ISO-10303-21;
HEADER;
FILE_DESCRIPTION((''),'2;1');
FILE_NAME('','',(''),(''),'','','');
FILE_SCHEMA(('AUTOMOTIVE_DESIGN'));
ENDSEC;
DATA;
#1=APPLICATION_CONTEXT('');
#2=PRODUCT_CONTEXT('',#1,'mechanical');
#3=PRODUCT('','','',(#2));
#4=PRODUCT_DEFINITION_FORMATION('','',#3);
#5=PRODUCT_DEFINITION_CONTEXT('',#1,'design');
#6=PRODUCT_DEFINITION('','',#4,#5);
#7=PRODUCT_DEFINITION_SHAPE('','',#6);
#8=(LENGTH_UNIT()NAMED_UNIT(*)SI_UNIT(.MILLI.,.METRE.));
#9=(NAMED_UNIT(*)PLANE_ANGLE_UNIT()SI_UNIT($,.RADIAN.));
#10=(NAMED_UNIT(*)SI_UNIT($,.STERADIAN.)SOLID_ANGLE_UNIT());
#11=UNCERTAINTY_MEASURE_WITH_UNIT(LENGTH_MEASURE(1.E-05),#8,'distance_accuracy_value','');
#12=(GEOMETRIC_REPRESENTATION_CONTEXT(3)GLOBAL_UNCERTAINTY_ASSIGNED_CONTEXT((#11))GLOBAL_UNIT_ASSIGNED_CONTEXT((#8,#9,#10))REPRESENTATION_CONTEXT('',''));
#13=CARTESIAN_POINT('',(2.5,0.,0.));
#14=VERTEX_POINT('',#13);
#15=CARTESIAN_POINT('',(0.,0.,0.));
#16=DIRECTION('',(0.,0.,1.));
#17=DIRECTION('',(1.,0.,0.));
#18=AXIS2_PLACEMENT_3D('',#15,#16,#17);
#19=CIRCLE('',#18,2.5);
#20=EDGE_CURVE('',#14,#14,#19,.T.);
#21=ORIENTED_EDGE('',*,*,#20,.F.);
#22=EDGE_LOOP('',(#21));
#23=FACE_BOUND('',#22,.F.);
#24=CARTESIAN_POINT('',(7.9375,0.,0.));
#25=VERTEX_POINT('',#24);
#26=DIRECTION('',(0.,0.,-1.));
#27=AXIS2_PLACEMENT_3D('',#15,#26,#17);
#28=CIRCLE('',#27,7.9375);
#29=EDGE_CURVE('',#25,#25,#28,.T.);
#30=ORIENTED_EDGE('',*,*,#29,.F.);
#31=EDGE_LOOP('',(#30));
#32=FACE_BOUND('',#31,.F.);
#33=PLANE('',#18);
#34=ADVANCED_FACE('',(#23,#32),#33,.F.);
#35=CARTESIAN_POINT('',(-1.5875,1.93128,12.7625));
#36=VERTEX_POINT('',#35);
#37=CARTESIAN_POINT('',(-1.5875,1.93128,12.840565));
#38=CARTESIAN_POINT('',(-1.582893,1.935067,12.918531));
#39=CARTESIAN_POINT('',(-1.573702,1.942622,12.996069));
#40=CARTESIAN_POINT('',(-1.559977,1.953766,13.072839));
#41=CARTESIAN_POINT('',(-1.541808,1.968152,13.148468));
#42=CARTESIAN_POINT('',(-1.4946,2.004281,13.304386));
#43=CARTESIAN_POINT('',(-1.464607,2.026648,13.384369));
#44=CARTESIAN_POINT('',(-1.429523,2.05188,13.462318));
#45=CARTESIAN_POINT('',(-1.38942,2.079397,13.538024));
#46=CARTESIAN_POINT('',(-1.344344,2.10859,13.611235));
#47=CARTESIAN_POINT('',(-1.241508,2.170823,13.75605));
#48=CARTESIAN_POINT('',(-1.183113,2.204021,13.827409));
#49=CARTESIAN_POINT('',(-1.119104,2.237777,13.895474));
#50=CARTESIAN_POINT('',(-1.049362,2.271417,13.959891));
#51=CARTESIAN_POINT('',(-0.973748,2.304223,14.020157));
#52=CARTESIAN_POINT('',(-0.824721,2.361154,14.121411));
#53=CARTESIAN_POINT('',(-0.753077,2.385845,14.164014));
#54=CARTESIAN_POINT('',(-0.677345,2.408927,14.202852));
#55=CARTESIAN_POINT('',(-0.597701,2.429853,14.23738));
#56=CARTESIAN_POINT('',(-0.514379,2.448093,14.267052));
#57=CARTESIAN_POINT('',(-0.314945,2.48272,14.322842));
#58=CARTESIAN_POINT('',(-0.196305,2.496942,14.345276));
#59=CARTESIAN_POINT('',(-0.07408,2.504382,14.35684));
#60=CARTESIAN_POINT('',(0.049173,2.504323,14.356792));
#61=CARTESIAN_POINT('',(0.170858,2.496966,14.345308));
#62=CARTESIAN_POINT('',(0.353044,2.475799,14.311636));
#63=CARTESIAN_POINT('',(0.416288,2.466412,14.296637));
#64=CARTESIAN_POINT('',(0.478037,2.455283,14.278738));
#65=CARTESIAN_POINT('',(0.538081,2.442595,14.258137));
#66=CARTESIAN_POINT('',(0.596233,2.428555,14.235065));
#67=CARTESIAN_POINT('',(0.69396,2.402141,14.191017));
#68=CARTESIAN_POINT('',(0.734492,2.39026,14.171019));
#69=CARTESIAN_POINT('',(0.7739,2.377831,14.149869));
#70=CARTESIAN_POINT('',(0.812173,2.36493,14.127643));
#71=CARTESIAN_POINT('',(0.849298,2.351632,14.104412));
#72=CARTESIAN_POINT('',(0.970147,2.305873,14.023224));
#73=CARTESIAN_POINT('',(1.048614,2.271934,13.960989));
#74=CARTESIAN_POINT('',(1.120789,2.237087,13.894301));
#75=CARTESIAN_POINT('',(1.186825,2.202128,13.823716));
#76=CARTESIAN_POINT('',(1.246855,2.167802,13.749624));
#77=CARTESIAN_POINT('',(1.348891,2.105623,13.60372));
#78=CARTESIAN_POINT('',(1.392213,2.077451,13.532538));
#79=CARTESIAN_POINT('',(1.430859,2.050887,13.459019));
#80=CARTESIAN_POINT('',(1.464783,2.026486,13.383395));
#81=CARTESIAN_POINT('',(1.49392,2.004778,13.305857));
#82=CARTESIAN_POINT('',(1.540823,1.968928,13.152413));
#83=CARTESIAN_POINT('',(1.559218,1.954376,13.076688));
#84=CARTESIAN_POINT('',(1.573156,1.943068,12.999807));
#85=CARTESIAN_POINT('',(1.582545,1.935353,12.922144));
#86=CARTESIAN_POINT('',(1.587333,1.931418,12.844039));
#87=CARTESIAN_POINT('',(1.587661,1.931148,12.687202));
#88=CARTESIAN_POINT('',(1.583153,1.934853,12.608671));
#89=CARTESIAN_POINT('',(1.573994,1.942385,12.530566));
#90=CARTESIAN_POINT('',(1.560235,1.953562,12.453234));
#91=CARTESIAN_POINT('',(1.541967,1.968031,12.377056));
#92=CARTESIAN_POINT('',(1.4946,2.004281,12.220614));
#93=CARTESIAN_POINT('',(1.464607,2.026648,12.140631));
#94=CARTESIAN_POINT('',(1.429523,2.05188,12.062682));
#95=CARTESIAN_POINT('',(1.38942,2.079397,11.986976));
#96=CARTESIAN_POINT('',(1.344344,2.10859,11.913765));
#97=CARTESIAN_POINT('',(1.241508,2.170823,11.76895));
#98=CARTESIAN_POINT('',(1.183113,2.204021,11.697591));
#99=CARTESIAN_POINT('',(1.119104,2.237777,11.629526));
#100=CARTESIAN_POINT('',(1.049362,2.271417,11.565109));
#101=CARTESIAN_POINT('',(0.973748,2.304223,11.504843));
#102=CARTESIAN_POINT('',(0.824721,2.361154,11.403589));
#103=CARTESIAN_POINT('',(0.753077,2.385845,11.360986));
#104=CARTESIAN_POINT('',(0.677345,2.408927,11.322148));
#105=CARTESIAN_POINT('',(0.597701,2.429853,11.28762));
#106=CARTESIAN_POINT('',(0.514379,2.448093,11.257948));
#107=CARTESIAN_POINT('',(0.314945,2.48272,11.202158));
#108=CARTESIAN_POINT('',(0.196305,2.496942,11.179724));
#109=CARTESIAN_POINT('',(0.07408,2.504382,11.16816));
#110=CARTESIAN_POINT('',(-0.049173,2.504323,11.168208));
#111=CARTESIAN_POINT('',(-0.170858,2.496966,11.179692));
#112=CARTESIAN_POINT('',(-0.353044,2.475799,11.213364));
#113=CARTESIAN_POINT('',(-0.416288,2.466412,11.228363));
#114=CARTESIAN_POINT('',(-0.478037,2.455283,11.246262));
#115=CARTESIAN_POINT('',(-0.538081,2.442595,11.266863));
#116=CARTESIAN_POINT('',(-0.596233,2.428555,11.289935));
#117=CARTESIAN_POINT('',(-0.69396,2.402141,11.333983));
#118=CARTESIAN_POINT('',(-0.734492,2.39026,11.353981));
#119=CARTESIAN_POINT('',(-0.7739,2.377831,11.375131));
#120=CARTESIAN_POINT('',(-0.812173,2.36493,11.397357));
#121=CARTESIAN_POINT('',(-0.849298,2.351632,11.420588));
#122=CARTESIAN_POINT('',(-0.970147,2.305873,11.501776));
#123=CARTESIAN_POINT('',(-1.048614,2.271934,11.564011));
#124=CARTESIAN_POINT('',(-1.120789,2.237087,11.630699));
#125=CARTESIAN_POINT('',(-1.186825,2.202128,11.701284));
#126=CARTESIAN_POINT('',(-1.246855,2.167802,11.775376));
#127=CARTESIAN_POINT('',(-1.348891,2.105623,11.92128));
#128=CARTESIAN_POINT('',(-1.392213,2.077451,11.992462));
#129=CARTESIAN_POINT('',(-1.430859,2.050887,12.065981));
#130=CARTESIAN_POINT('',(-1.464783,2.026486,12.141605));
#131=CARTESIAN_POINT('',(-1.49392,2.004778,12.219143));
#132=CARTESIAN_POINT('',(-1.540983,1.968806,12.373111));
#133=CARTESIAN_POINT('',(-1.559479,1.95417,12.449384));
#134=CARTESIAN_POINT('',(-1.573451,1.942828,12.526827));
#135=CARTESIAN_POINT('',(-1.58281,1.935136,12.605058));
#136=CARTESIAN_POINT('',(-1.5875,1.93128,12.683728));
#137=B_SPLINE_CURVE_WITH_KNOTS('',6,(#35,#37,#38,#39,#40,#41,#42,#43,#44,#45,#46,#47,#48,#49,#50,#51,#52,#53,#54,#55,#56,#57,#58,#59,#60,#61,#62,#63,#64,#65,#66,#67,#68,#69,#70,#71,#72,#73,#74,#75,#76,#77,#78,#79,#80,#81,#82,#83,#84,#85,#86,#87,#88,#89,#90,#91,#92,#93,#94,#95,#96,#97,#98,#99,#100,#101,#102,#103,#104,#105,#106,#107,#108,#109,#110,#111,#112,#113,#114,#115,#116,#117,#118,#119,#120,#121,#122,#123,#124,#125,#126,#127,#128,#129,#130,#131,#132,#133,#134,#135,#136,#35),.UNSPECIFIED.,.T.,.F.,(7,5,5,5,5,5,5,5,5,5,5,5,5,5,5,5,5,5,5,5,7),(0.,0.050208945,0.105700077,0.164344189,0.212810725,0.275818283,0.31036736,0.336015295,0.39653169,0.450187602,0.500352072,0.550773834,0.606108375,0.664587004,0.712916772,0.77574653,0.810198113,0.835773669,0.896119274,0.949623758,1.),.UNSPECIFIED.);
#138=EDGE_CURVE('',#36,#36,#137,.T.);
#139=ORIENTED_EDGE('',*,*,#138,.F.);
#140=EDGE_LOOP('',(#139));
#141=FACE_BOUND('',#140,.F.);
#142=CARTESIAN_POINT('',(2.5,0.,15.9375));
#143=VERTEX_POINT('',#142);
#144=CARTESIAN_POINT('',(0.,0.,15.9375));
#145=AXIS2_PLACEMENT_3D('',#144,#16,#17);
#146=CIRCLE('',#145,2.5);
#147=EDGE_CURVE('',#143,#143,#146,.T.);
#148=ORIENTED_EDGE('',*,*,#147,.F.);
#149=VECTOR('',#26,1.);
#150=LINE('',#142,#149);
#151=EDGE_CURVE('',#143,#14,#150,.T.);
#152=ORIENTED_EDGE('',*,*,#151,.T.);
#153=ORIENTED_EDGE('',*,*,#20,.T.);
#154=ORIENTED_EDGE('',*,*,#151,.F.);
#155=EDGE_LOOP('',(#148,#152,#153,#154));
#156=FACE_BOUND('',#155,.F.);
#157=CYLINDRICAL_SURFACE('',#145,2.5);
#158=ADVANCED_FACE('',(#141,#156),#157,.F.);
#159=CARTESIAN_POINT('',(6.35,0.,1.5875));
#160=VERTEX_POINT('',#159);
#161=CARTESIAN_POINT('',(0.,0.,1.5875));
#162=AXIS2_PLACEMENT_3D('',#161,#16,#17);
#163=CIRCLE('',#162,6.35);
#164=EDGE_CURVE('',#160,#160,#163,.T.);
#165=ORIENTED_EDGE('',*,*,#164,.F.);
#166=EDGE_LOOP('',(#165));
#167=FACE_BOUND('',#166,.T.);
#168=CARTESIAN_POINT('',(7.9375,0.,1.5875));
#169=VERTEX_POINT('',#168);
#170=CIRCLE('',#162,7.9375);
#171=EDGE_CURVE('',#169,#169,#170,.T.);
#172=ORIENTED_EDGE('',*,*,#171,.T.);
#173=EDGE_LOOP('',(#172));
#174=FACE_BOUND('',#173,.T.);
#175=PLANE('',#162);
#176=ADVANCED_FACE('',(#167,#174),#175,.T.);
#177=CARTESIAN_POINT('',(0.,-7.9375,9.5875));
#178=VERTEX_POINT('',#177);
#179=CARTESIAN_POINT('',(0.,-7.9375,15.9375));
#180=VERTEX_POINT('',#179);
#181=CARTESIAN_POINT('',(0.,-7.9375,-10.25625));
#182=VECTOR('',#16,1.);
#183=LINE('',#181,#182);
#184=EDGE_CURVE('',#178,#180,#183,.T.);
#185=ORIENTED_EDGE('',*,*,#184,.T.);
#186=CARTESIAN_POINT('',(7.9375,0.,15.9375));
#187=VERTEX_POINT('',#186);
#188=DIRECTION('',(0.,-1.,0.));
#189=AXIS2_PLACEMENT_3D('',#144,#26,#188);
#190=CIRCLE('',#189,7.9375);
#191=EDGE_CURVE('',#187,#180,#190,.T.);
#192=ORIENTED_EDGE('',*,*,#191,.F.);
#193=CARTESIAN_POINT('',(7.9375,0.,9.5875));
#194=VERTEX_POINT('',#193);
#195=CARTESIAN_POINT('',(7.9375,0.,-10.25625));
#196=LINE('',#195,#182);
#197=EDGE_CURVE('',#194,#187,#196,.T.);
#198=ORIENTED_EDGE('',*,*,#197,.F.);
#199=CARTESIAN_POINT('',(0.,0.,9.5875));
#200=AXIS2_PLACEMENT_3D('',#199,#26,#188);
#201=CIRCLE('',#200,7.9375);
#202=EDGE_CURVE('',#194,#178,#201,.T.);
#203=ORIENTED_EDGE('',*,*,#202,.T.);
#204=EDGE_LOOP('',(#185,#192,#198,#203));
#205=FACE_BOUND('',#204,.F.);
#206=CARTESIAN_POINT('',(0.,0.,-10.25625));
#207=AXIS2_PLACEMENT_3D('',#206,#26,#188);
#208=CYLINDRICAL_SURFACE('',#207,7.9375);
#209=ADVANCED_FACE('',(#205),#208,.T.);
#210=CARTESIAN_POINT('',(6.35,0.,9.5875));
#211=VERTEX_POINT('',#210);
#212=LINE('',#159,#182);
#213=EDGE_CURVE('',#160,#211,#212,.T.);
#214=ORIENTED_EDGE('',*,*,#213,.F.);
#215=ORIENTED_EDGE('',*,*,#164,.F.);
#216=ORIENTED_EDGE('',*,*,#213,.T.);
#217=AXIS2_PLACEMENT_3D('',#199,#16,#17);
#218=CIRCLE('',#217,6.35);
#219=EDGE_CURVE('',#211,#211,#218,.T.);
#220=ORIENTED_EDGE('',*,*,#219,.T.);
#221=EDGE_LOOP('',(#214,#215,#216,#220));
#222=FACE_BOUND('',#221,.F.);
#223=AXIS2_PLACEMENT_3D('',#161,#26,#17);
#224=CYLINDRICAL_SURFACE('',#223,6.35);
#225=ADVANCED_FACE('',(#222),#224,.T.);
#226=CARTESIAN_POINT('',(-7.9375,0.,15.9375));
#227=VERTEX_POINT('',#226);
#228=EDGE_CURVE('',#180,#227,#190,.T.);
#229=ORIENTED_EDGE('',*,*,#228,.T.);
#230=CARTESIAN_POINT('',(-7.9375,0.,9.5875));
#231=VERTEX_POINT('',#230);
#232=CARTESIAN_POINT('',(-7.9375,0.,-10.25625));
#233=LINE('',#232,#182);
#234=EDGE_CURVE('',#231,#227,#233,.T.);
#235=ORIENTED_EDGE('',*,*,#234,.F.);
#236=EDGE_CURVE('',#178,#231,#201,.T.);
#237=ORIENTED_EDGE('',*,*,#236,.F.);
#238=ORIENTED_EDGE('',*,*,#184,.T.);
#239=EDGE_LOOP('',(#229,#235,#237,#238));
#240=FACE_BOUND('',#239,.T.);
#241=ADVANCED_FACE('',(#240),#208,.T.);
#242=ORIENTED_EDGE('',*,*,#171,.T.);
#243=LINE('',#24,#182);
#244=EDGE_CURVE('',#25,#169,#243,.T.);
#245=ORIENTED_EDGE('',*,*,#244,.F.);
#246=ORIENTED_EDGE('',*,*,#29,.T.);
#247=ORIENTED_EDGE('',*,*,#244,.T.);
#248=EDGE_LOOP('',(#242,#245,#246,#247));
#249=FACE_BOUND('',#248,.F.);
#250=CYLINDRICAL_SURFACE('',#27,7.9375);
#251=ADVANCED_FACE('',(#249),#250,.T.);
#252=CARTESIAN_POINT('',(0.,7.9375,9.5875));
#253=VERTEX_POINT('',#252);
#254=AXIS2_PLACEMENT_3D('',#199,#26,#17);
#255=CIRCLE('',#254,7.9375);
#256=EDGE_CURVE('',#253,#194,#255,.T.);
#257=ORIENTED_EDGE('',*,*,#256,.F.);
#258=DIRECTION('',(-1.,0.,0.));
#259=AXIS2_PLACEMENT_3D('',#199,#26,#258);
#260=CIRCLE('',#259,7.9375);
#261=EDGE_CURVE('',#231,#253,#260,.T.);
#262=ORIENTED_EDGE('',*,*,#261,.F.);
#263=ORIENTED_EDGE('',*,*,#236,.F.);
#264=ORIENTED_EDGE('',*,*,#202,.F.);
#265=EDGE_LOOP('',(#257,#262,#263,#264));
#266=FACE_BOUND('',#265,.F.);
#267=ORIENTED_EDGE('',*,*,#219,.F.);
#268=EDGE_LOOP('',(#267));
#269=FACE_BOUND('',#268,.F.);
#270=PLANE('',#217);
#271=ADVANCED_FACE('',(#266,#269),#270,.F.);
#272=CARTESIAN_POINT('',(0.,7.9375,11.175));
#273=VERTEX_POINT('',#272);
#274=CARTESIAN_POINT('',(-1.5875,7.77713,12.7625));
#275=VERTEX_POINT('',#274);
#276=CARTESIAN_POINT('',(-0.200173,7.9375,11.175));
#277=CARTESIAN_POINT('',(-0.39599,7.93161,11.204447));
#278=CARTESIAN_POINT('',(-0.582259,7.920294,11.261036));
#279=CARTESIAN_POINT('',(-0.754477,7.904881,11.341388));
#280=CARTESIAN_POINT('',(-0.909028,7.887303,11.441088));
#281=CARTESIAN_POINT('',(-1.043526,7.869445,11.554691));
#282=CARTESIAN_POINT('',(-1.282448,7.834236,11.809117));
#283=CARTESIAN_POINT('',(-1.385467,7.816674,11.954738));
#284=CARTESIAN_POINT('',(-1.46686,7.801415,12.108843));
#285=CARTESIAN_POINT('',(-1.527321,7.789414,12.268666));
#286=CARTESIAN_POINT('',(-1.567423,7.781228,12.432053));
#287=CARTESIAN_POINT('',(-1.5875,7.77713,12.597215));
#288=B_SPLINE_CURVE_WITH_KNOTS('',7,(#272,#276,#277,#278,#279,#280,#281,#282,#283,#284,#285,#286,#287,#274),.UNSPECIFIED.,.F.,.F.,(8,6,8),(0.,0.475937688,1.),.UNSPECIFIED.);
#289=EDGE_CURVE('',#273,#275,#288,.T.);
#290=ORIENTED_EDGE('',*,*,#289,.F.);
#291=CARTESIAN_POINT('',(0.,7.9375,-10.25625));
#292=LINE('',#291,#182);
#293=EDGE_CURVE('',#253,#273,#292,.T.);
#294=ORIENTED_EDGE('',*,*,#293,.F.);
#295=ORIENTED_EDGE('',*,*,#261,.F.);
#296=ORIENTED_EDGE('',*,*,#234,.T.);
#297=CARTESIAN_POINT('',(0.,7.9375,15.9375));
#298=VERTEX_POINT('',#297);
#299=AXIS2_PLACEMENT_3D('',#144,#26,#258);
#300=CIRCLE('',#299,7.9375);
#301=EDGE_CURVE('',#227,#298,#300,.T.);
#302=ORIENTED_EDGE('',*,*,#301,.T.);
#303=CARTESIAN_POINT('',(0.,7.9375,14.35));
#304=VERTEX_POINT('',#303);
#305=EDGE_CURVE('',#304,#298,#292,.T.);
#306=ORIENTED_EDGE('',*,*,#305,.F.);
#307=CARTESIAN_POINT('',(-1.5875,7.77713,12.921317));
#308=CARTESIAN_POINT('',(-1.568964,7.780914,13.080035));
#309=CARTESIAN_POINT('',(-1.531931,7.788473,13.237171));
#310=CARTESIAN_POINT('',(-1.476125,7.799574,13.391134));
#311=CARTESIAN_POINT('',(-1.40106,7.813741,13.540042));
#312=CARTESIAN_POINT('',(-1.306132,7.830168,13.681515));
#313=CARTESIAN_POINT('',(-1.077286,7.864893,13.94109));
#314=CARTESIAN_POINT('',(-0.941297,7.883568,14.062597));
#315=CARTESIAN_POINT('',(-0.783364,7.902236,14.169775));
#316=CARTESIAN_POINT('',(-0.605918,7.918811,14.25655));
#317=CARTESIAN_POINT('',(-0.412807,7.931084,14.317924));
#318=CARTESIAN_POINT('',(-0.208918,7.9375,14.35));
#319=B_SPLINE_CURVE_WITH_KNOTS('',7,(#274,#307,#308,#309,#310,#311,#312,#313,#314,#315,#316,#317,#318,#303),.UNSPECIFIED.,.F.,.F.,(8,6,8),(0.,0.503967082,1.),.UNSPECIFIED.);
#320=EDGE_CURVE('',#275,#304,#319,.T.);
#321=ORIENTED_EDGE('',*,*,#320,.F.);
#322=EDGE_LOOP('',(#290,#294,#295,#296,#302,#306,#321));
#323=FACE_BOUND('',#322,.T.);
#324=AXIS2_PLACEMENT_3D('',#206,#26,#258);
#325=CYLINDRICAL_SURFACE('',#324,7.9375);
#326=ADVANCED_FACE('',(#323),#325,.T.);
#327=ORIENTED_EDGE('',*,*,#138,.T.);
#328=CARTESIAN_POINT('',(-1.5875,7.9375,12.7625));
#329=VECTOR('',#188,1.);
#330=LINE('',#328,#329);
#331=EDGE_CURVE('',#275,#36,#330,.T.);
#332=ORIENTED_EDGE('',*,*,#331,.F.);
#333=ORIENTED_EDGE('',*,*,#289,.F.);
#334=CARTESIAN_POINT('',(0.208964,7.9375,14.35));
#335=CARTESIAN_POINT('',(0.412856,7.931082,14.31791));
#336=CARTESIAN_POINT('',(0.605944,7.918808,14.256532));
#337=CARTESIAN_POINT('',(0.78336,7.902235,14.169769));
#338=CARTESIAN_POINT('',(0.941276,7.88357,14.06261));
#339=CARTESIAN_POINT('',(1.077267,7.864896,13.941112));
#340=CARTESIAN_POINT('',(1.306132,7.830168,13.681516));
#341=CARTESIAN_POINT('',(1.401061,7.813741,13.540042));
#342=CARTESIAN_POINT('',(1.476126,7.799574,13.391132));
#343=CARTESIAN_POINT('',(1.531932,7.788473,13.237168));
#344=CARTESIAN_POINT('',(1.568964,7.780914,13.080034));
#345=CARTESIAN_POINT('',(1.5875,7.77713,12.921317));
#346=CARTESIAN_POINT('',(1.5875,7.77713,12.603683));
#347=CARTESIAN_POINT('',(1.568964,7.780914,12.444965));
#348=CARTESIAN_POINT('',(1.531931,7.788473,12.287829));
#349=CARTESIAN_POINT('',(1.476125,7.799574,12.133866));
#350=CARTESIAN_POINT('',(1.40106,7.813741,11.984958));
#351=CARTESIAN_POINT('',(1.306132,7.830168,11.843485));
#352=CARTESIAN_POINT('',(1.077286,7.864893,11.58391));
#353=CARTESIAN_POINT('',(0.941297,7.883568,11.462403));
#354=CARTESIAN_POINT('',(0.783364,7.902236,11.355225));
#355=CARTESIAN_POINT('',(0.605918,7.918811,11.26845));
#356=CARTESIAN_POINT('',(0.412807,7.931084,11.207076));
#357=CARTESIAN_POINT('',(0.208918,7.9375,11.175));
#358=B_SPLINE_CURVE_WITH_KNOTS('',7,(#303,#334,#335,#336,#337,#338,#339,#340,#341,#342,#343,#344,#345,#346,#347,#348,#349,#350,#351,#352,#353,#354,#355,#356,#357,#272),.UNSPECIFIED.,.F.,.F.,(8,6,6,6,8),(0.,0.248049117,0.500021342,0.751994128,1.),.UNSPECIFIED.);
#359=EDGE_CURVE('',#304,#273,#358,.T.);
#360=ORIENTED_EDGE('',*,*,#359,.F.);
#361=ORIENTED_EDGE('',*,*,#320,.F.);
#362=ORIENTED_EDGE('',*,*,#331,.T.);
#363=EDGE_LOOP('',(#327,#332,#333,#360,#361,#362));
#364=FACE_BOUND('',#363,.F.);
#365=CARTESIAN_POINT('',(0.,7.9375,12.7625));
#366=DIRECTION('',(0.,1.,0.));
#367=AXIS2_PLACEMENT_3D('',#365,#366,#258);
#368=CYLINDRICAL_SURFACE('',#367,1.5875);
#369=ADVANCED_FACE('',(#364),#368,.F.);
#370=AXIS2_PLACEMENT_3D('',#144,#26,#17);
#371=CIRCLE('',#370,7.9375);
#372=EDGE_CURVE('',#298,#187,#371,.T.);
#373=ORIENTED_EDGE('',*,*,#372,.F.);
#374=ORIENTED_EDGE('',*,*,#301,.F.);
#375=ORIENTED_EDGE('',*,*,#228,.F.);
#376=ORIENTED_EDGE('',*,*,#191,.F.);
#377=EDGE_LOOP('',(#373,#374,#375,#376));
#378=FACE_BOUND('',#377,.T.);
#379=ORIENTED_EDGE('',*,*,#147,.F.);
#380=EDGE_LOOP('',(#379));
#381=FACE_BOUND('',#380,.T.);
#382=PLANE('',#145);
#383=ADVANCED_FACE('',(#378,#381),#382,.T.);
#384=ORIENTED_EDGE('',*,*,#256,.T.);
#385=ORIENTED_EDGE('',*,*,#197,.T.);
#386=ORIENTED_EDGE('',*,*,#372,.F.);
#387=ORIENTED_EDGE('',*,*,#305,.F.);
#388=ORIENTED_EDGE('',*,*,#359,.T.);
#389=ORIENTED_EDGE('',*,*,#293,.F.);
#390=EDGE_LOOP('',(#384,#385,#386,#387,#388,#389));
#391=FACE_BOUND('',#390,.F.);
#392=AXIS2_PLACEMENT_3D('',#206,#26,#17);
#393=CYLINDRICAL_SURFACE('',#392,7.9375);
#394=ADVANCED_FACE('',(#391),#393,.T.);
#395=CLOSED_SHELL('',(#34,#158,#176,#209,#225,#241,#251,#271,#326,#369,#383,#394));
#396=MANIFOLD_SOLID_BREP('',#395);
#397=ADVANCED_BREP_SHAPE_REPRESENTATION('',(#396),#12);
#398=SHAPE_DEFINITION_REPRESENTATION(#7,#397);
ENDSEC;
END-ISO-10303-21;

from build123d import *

# Parameters (mm, degrees)
F0_R         = 7.9375
F1_DEPTH     = 1.5875
F2_R         = 6.35
F3_DEPTH     = 8
F4_W         = 15.875
F4_H         = 15.875
F5_DEPTH     = 6.35
F6_R         = 2.5
F7_DEPTH     = 15.9375
F8_R         = 1.5875
F9_REACH     = 20.3661280605
F10_T1_DEPTH = 46.0375


# Not quite as in the source:
# - a fillet or chamfer that OpenCascade refuses, or shapes differently, is made with other operations: its cross-section is extruded or revolved along the edge and cut away or added


with BuildPart() as f1:
    # F0 (on Top) → F1 (new body)
    with BuildSketch(Plane.XY):
        Circle(F0_R)
    extrude(amount=F1_DEPTH)

    # F2 (on face) → F3 (join)
    with BuildSketch(Plane.XY.offset(1.5875)):
        Circle(F2_R)
    extrude(amount=F3_DEPTH)

    # F4 (on face) → F5 (join)
    with BuildSketch(Plane.XY.offset(9.5875)):
        Rectangle(F4_W, F4_H)
    extrude(amount=F5_DEPTH)

    # F6 (on face) → F7 (cut, through all)
    with BuildSketch(Plane.XY.offset(15.9375)):
        Circle(F6_R)
    extrude(amount=-F7_DEPTH, mode=Mode.SUBTRACT)

    f9_end = f1.faces().sort_by_distance((-2.5, 0, 7.96875))[0]
    # F8 (on face) → F9 (cut, up to a face of the model that its end follows)
    with BuildSketch(Plane(origin=(0, 7.9375, 0), x_dir=(-1, 0, 0), z_dir=(0, 1, 0))):
        with Locations((0, 12.7625)):
            Circle(F8_R)
    f9_long = extrude(amount=-F9_REACH, mode=Mode.PRIVATE)
    add(split(f9_long, bisect_by=f9_end, keep=Keep.ALL, mode=Mode.PRIVATE).solids().sort_by_distance((0, 7.9375, 12.7625))[0], mode=Mode.SUBTRACT)

    # F10: fillet of radius 7.9375 on 4 edges, made by hand

    # F10_s2 → F10_t1 (cut)
    with BuildSketch(Plane.XY.offset(-10.25625)):
        with BuildLine():
            ThreePointArc((-7.9375, 0), (-5.6126600757, 5.6126600757), (0, 7.9375))
            Line((0, 7.9375), (-7.9375, 7.9375))
            Line((-7.9375, 7.9375), (-7.9375, 0))
        make_face()
        with BuildLine():
            ThreePointArc((0, -7.9375), (-5.6126600757, -5.6126600757), (-7.9375, 0))
            Line((-7.9375, 0), (-7.9375, -7.9375))
            Line((-7.9375, -7.9375), (0, -7.9375))
        make_face()
        with BuildLine():
            ThreePointArc((7.9375, 0), (5.6126600757, 5.6126600757), (0, 7.9375))
            Line((0, 7.9375), (7.9375, 7.9375))
            Line((7.9375, 7.9375), (7.9375, 0))
        make_face()
        with BuildLine():
            ThreePointArc((0, -7.9375), (5.6126600757, -5.6126600757), (7.9375, 0))
            Line((7.9375, 0), (7.9375, -7.9375))
            Line((7.9375, -7.9375), (0, -7.9375))
        make_face()
    extrude(amount=F10_T1_DEPTH, mode=Mode.SUBTRACT)


solid = f1.part
